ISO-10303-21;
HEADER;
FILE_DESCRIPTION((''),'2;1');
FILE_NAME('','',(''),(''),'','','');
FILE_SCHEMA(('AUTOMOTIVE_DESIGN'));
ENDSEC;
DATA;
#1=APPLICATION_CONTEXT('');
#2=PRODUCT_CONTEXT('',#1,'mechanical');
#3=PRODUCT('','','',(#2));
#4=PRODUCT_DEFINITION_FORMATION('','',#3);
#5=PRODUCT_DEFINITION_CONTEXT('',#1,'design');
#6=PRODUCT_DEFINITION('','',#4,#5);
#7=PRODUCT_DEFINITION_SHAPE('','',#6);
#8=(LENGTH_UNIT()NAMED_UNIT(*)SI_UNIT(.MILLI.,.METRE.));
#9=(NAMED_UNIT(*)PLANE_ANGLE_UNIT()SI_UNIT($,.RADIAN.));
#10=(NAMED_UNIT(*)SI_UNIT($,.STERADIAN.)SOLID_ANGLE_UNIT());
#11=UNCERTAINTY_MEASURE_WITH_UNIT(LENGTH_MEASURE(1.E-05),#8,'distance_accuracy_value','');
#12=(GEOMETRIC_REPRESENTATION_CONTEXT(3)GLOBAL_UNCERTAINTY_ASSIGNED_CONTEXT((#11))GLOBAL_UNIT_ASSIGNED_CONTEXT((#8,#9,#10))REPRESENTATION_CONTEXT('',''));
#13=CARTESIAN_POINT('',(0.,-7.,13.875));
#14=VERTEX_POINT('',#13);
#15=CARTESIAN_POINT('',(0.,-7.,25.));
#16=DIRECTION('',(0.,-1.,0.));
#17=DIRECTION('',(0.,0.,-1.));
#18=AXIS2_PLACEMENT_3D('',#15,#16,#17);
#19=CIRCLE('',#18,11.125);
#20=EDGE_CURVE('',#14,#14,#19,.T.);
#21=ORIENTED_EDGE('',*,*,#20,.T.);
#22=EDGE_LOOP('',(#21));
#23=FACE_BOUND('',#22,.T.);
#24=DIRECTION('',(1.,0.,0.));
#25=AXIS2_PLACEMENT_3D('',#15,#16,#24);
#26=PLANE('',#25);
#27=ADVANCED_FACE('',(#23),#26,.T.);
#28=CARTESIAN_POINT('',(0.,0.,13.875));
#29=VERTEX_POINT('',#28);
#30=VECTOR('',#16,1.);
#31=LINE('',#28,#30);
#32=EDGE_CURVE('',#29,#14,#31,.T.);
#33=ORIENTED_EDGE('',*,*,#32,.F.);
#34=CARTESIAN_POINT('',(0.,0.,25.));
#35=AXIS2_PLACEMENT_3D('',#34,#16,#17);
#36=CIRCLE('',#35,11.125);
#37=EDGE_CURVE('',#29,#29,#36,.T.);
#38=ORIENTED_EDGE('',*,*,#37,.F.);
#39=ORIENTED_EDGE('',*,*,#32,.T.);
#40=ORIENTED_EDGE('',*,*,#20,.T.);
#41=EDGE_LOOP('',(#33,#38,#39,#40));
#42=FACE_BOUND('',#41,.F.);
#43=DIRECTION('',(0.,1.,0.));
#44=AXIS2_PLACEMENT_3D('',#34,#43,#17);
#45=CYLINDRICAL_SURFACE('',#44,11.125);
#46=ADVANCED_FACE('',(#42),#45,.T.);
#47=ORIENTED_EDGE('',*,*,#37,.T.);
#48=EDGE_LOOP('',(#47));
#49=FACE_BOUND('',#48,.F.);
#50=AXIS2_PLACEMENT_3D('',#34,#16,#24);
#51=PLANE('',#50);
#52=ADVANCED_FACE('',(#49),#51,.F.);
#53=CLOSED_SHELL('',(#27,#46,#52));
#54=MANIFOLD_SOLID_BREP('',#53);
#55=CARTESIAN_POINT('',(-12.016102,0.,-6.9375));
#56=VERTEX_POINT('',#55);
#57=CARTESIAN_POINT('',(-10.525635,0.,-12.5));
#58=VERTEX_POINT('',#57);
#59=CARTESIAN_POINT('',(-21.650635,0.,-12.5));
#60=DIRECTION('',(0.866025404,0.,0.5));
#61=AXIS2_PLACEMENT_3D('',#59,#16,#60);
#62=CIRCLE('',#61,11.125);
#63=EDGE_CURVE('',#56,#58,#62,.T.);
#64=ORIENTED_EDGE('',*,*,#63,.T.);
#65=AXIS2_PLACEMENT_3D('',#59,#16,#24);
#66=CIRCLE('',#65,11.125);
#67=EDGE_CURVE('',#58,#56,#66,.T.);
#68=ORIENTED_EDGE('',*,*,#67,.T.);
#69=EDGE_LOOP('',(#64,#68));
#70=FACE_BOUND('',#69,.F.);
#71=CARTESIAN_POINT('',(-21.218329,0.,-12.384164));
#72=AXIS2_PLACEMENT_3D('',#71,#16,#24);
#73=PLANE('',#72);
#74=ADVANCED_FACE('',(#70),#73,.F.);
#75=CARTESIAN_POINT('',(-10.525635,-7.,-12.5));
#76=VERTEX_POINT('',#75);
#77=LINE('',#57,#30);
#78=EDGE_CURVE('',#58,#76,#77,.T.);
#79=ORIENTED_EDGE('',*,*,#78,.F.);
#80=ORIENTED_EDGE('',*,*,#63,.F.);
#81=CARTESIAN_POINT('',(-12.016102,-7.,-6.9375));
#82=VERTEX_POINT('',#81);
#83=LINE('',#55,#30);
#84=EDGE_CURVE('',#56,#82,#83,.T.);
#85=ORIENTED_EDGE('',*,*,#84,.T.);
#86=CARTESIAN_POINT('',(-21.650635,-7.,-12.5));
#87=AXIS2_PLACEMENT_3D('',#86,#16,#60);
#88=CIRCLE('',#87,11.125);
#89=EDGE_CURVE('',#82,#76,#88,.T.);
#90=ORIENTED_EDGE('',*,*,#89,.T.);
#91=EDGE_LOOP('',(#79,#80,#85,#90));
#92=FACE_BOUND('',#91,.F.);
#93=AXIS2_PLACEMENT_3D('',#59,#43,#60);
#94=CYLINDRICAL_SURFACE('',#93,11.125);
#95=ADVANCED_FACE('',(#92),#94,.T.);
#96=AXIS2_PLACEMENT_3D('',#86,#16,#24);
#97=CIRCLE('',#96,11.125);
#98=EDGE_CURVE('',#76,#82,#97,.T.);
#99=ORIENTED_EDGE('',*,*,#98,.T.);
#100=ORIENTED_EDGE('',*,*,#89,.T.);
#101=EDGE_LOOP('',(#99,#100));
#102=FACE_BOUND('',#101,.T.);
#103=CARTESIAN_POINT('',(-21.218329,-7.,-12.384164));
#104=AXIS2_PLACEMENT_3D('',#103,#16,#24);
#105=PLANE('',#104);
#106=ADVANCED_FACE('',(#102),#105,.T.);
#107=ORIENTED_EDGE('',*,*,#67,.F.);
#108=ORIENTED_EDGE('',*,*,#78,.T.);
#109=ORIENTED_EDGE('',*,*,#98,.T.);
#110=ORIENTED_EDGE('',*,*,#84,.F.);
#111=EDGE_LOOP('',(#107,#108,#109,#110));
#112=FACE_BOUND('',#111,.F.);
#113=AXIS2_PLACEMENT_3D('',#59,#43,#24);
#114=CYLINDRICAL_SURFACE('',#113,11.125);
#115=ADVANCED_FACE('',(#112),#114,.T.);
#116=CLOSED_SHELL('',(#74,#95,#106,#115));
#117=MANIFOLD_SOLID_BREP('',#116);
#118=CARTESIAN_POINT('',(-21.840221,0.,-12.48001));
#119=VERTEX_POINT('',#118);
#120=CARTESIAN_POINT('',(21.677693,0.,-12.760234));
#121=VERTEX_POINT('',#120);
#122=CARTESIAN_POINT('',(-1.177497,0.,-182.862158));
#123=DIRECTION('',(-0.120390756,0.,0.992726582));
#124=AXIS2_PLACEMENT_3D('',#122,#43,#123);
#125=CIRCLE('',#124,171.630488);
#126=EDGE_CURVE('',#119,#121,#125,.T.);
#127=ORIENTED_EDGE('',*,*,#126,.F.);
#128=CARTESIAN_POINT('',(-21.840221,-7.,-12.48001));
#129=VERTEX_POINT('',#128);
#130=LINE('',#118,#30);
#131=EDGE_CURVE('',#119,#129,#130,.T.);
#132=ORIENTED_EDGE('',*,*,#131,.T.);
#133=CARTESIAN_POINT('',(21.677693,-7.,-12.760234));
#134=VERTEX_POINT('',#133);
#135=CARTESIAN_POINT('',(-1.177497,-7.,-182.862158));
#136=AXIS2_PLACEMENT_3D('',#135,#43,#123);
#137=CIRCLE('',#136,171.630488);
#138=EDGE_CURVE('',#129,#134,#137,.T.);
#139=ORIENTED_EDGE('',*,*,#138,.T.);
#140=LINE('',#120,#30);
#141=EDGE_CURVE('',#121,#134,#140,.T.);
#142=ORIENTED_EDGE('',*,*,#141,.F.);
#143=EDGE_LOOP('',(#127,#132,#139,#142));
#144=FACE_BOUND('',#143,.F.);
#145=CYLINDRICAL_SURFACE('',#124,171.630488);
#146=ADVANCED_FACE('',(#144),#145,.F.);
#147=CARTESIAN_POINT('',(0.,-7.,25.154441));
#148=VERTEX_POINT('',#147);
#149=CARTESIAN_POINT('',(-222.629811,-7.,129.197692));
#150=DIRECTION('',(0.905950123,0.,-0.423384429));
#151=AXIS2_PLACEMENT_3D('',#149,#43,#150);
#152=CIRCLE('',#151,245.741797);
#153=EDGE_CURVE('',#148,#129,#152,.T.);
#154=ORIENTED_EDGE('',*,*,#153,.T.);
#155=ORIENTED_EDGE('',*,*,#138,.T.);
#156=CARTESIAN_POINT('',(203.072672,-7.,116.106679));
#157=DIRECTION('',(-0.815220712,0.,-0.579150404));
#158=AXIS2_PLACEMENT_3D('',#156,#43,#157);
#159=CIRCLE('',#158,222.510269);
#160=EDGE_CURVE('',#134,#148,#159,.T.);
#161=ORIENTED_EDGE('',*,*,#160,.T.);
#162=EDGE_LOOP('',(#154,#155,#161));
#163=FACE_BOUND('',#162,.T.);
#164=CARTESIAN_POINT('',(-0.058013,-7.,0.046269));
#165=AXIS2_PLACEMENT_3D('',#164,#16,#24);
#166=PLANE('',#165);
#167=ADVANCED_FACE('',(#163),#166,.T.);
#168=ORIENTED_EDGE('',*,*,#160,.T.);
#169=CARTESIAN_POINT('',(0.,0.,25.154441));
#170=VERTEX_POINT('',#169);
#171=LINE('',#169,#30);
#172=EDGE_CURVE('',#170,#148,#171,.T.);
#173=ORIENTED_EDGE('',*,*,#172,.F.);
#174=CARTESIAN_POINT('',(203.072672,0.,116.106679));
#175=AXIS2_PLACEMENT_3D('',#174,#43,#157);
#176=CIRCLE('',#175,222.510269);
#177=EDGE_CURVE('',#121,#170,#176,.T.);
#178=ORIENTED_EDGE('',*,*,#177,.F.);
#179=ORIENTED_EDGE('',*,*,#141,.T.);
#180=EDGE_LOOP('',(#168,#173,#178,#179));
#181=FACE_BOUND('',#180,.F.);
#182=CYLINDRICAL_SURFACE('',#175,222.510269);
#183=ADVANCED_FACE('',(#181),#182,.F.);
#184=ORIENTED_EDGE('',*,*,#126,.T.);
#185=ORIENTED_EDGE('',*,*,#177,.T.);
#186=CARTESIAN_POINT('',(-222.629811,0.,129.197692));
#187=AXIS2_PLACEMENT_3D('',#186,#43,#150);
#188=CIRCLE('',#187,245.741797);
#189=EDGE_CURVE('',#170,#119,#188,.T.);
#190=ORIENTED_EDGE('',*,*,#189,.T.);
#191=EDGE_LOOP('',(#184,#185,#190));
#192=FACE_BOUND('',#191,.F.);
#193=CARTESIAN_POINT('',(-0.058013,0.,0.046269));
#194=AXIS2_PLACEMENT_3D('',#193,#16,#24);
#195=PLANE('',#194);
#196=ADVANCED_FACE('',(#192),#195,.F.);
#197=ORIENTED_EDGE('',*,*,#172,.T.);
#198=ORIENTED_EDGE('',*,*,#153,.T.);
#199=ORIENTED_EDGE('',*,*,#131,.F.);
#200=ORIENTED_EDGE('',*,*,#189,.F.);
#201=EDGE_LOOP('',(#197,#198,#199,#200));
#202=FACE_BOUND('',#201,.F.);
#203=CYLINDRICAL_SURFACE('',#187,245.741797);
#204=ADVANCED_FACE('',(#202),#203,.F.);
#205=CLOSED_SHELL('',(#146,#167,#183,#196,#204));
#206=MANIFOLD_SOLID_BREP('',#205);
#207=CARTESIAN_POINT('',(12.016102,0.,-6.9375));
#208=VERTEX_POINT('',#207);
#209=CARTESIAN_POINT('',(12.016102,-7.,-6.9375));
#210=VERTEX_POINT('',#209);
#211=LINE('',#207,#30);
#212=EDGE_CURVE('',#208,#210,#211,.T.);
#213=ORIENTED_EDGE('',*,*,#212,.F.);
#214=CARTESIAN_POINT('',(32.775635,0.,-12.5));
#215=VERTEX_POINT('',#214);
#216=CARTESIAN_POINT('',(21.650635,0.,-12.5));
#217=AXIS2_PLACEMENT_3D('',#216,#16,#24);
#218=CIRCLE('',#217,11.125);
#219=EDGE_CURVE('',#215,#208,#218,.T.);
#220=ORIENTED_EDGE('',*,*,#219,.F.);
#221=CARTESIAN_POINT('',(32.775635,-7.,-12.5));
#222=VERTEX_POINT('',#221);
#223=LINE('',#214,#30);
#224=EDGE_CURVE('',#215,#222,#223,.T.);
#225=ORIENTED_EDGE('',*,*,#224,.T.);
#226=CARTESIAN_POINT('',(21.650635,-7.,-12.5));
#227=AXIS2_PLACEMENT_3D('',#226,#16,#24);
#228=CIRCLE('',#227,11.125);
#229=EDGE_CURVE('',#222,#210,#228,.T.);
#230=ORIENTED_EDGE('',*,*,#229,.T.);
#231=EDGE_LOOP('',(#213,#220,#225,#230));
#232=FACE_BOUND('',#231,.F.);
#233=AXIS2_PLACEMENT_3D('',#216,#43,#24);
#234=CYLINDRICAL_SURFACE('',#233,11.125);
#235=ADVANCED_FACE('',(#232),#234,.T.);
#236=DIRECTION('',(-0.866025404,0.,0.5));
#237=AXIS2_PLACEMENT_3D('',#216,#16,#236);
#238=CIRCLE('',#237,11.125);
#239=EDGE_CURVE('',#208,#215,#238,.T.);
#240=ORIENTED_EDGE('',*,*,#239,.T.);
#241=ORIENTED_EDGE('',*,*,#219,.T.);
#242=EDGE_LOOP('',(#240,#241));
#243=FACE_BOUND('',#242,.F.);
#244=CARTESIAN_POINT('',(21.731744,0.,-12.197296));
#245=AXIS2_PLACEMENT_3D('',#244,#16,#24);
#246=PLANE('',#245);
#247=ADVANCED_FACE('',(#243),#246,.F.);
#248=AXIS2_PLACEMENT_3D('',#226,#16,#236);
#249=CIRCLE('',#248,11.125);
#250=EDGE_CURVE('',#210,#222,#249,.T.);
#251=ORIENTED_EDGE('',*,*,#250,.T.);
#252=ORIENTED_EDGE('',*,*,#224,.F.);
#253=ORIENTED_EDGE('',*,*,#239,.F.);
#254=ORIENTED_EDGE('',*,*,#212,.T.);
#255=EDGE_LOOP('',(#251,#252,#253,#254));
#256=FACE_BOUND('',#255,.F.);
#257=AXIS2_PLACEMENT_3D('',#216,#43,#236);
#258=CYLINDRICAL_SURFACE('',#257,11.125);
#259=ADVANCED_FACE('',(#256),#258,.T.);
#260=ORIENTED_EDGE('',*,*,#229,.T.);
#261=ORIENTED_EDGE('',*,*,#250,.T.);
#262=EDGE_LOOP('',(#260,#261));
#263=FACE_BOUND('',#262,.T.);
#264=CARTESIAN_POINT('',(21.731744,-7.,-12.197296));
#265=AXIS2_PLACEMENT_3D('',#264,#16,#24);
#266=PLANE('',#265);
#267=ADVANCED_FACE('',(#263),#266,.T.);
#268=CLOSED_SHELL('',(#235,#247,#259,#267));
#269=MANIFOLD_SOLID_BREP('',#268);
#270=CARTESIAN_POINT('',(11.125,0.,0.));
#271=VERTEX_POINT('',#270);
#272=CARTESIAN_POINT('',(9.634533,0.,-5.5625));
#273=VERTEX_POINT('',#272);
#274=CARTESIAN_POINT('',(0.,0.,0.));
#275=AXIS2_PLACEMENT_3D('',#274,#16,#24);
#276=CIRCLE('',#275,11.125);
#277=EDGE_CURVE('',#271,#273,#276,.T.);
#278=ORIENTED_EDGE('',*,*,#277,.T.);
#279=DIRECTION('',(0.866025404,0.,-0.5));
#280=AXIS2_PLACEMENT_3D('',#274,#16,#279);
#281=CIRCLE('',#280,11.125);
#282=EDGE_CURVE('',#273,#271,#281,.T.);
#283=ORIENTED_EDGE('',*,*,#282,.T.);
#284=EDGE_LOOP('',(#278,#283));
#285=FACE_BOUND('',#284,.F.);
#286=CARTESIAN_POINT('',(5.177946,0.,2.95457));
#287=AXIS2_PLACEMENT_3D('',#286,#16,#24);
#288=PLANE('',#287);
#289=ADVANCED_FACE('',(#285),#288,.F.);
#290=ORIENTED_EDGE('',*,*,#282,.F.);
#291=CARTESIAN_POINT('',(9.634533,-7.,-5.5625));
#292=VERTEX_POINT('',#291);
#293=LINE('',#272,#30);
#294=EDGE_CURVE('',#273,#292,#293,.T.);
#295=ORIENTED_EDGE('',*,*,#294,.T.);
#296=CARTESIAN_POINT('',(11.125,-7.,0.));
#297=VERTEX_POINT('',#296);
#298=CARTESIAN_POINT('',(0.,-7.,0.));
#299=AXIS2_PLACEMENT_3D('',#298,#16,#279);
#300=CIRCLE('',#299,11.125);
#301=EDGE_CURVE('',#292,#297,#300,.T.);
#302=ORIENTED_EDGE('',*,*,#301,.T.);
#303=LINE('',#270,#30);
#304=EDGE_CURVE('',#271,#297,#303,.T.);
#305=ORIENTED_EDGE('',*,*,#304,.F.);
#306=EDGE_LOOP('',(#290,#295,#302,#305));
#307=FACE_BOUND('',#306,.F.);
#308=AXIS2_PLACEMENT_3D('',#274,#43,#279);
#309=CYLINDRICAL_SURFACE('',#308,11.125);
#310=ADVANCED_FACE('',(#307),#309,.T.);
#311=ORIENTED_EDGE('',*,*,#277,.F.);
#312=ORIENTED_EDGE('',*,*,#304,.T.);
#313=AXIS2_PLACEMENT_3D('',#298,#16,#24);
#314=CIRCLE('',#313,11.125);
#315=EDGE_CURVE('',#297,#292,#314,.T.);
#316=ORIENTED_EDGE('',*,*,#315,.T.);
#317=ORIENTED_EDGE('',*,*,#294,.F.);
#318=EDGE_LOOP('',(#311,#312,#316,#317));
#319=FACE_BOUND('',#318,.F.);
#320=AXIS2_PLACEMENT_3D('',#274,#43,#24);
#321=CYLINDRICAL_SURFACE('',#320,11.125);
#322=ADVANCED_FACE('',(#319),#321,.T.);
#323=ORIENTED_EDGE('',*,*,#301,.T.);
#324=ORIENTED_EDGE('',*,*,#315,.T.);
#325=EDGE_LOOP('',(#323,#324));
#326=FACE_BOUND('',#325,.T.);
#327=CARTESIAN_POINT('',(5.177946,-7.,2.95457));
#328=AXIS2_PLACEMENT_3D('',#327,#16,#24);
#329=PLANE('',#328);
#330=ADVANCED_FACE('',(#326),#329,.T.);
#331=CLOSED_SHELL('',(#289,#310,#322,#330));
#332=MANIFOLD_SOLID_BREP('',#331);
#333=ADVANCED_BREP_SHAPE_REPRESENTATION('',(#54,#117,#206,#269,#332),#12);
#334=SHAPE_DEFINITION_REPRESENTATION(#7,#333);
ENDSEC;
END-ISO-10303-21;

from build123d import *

# Parameters (mm, degrees)
F2_DEPTH = 7
F3_DEPTH = 7


# Not quite as in the source:
# - a feature of the source that left no trace in its solid (it failed there, or was rolled back) is left out


with BuildPart() as f2:
    # F0 (on Front) → F2 (new body)
    with BuildSketch(Plane.XZ):
        with BuildLine():
            ThreePointArc((9.6345326171, -5.5625), (10.7459248175, -2.8793618768), (11.125, 0))
            ThreePointArc((11.125, 0), (7.8665629407, 7.8665629407), (0, 11.125))
            Line((0, 11.125), (0, 0))
            Line((0, 0), (9.6345326171, -5.5625))
        make_face()
        with BuildLine():
            Line((0, 0), (0, 11.125))
            ThreePointArc((0, 11.125), (-9.6345326171, 5.5625), (-9.6345326171, -5.5625))
            Line((-9.6345326171, -5.5625), (0, 0))
        make_face()
        with BuildLine():
            ThreePointArc((-9.6345326171, -5.5625), (0, -11.125), (9.6345326171, -5.5625))
            Line((9.6345326171, -5.5625), (0, 0))
            Line((0, 0), (-9.6345326171, -5.5625))
        make_face()
    extrude(amount=F2_DEPTH)


with BuildPart() as f2b:
    # F0 (on Front) → F2, piece 2 (new body)
    with BuildSketch(Plane.XZ):
        with BuildLine():
            ThreePointArc((32.7756350946, -12.5), (24.5299969714, -1.7540751825), (12.0161024775, -6.9375))
            ThreePointArc((12.0161024775, -6.9375), (18.7712732178, -23.2459248175), (32.7756350946, -12.5))
        make_face()
    extrude(amount=F2_DEPTH)


with BuildPart() as f2c:
    # F0 (on Front) → F2, piece 3 (new body)
    with BuildSketch(Plane.XZ):
        with BuildLine():
            ThreePointArc((-10.5256350946, -12.5), (-10.9047102771, -9.6206381232), (-12.0161024775, -6.9375))
            ThreePointArc((-12.0161024775, -6.9375), (-32.3965599121, -15.3793618768), (-10.5256350946, -12.5))
        make_face()
    extrude(amount=F2_DEPTH)


with BuildPart() as f2d:
    # F0 (on Front) → F2, piece 4 (new body)
    with BuildSketch(Plane.XZ):
        with BuildLine():
            ThreePointArc((11.125, 25), (-7.8665629407, 32.8665629407), (0, 13.875))
            ThreePointArc((0, 13.875), (7.8665629407, 17.1334370593), (11.125, 25))
        make_face()
    extrude(amount=F2_DEPTH)


with BuildPart() as f3:
    # F1 (on Front) → F3 (new body)
    with BuildSketch(Plane.XZ):
        with BuildLine():
            ThreePointArc((0, 25.154441337), (-10.0854973849, 5.8528683876), (-21.8402211228, -12.480010428))
            ThreePointArc((-21.8402211228, -12.480010428), (-0.0723465521, -11.2352282244), (21.6776926373, -12.7602335754))
            ThreePointArc((21.6776926373, -12.7602335754), (9.9063592573, 5.6639549628), (0, 25.154441337))
        make_face()
    extrude(amount=F3_DEPTH)


solid = Compound([f2.part, f2b.part, f2c.part, f2d.part, f3.part])
